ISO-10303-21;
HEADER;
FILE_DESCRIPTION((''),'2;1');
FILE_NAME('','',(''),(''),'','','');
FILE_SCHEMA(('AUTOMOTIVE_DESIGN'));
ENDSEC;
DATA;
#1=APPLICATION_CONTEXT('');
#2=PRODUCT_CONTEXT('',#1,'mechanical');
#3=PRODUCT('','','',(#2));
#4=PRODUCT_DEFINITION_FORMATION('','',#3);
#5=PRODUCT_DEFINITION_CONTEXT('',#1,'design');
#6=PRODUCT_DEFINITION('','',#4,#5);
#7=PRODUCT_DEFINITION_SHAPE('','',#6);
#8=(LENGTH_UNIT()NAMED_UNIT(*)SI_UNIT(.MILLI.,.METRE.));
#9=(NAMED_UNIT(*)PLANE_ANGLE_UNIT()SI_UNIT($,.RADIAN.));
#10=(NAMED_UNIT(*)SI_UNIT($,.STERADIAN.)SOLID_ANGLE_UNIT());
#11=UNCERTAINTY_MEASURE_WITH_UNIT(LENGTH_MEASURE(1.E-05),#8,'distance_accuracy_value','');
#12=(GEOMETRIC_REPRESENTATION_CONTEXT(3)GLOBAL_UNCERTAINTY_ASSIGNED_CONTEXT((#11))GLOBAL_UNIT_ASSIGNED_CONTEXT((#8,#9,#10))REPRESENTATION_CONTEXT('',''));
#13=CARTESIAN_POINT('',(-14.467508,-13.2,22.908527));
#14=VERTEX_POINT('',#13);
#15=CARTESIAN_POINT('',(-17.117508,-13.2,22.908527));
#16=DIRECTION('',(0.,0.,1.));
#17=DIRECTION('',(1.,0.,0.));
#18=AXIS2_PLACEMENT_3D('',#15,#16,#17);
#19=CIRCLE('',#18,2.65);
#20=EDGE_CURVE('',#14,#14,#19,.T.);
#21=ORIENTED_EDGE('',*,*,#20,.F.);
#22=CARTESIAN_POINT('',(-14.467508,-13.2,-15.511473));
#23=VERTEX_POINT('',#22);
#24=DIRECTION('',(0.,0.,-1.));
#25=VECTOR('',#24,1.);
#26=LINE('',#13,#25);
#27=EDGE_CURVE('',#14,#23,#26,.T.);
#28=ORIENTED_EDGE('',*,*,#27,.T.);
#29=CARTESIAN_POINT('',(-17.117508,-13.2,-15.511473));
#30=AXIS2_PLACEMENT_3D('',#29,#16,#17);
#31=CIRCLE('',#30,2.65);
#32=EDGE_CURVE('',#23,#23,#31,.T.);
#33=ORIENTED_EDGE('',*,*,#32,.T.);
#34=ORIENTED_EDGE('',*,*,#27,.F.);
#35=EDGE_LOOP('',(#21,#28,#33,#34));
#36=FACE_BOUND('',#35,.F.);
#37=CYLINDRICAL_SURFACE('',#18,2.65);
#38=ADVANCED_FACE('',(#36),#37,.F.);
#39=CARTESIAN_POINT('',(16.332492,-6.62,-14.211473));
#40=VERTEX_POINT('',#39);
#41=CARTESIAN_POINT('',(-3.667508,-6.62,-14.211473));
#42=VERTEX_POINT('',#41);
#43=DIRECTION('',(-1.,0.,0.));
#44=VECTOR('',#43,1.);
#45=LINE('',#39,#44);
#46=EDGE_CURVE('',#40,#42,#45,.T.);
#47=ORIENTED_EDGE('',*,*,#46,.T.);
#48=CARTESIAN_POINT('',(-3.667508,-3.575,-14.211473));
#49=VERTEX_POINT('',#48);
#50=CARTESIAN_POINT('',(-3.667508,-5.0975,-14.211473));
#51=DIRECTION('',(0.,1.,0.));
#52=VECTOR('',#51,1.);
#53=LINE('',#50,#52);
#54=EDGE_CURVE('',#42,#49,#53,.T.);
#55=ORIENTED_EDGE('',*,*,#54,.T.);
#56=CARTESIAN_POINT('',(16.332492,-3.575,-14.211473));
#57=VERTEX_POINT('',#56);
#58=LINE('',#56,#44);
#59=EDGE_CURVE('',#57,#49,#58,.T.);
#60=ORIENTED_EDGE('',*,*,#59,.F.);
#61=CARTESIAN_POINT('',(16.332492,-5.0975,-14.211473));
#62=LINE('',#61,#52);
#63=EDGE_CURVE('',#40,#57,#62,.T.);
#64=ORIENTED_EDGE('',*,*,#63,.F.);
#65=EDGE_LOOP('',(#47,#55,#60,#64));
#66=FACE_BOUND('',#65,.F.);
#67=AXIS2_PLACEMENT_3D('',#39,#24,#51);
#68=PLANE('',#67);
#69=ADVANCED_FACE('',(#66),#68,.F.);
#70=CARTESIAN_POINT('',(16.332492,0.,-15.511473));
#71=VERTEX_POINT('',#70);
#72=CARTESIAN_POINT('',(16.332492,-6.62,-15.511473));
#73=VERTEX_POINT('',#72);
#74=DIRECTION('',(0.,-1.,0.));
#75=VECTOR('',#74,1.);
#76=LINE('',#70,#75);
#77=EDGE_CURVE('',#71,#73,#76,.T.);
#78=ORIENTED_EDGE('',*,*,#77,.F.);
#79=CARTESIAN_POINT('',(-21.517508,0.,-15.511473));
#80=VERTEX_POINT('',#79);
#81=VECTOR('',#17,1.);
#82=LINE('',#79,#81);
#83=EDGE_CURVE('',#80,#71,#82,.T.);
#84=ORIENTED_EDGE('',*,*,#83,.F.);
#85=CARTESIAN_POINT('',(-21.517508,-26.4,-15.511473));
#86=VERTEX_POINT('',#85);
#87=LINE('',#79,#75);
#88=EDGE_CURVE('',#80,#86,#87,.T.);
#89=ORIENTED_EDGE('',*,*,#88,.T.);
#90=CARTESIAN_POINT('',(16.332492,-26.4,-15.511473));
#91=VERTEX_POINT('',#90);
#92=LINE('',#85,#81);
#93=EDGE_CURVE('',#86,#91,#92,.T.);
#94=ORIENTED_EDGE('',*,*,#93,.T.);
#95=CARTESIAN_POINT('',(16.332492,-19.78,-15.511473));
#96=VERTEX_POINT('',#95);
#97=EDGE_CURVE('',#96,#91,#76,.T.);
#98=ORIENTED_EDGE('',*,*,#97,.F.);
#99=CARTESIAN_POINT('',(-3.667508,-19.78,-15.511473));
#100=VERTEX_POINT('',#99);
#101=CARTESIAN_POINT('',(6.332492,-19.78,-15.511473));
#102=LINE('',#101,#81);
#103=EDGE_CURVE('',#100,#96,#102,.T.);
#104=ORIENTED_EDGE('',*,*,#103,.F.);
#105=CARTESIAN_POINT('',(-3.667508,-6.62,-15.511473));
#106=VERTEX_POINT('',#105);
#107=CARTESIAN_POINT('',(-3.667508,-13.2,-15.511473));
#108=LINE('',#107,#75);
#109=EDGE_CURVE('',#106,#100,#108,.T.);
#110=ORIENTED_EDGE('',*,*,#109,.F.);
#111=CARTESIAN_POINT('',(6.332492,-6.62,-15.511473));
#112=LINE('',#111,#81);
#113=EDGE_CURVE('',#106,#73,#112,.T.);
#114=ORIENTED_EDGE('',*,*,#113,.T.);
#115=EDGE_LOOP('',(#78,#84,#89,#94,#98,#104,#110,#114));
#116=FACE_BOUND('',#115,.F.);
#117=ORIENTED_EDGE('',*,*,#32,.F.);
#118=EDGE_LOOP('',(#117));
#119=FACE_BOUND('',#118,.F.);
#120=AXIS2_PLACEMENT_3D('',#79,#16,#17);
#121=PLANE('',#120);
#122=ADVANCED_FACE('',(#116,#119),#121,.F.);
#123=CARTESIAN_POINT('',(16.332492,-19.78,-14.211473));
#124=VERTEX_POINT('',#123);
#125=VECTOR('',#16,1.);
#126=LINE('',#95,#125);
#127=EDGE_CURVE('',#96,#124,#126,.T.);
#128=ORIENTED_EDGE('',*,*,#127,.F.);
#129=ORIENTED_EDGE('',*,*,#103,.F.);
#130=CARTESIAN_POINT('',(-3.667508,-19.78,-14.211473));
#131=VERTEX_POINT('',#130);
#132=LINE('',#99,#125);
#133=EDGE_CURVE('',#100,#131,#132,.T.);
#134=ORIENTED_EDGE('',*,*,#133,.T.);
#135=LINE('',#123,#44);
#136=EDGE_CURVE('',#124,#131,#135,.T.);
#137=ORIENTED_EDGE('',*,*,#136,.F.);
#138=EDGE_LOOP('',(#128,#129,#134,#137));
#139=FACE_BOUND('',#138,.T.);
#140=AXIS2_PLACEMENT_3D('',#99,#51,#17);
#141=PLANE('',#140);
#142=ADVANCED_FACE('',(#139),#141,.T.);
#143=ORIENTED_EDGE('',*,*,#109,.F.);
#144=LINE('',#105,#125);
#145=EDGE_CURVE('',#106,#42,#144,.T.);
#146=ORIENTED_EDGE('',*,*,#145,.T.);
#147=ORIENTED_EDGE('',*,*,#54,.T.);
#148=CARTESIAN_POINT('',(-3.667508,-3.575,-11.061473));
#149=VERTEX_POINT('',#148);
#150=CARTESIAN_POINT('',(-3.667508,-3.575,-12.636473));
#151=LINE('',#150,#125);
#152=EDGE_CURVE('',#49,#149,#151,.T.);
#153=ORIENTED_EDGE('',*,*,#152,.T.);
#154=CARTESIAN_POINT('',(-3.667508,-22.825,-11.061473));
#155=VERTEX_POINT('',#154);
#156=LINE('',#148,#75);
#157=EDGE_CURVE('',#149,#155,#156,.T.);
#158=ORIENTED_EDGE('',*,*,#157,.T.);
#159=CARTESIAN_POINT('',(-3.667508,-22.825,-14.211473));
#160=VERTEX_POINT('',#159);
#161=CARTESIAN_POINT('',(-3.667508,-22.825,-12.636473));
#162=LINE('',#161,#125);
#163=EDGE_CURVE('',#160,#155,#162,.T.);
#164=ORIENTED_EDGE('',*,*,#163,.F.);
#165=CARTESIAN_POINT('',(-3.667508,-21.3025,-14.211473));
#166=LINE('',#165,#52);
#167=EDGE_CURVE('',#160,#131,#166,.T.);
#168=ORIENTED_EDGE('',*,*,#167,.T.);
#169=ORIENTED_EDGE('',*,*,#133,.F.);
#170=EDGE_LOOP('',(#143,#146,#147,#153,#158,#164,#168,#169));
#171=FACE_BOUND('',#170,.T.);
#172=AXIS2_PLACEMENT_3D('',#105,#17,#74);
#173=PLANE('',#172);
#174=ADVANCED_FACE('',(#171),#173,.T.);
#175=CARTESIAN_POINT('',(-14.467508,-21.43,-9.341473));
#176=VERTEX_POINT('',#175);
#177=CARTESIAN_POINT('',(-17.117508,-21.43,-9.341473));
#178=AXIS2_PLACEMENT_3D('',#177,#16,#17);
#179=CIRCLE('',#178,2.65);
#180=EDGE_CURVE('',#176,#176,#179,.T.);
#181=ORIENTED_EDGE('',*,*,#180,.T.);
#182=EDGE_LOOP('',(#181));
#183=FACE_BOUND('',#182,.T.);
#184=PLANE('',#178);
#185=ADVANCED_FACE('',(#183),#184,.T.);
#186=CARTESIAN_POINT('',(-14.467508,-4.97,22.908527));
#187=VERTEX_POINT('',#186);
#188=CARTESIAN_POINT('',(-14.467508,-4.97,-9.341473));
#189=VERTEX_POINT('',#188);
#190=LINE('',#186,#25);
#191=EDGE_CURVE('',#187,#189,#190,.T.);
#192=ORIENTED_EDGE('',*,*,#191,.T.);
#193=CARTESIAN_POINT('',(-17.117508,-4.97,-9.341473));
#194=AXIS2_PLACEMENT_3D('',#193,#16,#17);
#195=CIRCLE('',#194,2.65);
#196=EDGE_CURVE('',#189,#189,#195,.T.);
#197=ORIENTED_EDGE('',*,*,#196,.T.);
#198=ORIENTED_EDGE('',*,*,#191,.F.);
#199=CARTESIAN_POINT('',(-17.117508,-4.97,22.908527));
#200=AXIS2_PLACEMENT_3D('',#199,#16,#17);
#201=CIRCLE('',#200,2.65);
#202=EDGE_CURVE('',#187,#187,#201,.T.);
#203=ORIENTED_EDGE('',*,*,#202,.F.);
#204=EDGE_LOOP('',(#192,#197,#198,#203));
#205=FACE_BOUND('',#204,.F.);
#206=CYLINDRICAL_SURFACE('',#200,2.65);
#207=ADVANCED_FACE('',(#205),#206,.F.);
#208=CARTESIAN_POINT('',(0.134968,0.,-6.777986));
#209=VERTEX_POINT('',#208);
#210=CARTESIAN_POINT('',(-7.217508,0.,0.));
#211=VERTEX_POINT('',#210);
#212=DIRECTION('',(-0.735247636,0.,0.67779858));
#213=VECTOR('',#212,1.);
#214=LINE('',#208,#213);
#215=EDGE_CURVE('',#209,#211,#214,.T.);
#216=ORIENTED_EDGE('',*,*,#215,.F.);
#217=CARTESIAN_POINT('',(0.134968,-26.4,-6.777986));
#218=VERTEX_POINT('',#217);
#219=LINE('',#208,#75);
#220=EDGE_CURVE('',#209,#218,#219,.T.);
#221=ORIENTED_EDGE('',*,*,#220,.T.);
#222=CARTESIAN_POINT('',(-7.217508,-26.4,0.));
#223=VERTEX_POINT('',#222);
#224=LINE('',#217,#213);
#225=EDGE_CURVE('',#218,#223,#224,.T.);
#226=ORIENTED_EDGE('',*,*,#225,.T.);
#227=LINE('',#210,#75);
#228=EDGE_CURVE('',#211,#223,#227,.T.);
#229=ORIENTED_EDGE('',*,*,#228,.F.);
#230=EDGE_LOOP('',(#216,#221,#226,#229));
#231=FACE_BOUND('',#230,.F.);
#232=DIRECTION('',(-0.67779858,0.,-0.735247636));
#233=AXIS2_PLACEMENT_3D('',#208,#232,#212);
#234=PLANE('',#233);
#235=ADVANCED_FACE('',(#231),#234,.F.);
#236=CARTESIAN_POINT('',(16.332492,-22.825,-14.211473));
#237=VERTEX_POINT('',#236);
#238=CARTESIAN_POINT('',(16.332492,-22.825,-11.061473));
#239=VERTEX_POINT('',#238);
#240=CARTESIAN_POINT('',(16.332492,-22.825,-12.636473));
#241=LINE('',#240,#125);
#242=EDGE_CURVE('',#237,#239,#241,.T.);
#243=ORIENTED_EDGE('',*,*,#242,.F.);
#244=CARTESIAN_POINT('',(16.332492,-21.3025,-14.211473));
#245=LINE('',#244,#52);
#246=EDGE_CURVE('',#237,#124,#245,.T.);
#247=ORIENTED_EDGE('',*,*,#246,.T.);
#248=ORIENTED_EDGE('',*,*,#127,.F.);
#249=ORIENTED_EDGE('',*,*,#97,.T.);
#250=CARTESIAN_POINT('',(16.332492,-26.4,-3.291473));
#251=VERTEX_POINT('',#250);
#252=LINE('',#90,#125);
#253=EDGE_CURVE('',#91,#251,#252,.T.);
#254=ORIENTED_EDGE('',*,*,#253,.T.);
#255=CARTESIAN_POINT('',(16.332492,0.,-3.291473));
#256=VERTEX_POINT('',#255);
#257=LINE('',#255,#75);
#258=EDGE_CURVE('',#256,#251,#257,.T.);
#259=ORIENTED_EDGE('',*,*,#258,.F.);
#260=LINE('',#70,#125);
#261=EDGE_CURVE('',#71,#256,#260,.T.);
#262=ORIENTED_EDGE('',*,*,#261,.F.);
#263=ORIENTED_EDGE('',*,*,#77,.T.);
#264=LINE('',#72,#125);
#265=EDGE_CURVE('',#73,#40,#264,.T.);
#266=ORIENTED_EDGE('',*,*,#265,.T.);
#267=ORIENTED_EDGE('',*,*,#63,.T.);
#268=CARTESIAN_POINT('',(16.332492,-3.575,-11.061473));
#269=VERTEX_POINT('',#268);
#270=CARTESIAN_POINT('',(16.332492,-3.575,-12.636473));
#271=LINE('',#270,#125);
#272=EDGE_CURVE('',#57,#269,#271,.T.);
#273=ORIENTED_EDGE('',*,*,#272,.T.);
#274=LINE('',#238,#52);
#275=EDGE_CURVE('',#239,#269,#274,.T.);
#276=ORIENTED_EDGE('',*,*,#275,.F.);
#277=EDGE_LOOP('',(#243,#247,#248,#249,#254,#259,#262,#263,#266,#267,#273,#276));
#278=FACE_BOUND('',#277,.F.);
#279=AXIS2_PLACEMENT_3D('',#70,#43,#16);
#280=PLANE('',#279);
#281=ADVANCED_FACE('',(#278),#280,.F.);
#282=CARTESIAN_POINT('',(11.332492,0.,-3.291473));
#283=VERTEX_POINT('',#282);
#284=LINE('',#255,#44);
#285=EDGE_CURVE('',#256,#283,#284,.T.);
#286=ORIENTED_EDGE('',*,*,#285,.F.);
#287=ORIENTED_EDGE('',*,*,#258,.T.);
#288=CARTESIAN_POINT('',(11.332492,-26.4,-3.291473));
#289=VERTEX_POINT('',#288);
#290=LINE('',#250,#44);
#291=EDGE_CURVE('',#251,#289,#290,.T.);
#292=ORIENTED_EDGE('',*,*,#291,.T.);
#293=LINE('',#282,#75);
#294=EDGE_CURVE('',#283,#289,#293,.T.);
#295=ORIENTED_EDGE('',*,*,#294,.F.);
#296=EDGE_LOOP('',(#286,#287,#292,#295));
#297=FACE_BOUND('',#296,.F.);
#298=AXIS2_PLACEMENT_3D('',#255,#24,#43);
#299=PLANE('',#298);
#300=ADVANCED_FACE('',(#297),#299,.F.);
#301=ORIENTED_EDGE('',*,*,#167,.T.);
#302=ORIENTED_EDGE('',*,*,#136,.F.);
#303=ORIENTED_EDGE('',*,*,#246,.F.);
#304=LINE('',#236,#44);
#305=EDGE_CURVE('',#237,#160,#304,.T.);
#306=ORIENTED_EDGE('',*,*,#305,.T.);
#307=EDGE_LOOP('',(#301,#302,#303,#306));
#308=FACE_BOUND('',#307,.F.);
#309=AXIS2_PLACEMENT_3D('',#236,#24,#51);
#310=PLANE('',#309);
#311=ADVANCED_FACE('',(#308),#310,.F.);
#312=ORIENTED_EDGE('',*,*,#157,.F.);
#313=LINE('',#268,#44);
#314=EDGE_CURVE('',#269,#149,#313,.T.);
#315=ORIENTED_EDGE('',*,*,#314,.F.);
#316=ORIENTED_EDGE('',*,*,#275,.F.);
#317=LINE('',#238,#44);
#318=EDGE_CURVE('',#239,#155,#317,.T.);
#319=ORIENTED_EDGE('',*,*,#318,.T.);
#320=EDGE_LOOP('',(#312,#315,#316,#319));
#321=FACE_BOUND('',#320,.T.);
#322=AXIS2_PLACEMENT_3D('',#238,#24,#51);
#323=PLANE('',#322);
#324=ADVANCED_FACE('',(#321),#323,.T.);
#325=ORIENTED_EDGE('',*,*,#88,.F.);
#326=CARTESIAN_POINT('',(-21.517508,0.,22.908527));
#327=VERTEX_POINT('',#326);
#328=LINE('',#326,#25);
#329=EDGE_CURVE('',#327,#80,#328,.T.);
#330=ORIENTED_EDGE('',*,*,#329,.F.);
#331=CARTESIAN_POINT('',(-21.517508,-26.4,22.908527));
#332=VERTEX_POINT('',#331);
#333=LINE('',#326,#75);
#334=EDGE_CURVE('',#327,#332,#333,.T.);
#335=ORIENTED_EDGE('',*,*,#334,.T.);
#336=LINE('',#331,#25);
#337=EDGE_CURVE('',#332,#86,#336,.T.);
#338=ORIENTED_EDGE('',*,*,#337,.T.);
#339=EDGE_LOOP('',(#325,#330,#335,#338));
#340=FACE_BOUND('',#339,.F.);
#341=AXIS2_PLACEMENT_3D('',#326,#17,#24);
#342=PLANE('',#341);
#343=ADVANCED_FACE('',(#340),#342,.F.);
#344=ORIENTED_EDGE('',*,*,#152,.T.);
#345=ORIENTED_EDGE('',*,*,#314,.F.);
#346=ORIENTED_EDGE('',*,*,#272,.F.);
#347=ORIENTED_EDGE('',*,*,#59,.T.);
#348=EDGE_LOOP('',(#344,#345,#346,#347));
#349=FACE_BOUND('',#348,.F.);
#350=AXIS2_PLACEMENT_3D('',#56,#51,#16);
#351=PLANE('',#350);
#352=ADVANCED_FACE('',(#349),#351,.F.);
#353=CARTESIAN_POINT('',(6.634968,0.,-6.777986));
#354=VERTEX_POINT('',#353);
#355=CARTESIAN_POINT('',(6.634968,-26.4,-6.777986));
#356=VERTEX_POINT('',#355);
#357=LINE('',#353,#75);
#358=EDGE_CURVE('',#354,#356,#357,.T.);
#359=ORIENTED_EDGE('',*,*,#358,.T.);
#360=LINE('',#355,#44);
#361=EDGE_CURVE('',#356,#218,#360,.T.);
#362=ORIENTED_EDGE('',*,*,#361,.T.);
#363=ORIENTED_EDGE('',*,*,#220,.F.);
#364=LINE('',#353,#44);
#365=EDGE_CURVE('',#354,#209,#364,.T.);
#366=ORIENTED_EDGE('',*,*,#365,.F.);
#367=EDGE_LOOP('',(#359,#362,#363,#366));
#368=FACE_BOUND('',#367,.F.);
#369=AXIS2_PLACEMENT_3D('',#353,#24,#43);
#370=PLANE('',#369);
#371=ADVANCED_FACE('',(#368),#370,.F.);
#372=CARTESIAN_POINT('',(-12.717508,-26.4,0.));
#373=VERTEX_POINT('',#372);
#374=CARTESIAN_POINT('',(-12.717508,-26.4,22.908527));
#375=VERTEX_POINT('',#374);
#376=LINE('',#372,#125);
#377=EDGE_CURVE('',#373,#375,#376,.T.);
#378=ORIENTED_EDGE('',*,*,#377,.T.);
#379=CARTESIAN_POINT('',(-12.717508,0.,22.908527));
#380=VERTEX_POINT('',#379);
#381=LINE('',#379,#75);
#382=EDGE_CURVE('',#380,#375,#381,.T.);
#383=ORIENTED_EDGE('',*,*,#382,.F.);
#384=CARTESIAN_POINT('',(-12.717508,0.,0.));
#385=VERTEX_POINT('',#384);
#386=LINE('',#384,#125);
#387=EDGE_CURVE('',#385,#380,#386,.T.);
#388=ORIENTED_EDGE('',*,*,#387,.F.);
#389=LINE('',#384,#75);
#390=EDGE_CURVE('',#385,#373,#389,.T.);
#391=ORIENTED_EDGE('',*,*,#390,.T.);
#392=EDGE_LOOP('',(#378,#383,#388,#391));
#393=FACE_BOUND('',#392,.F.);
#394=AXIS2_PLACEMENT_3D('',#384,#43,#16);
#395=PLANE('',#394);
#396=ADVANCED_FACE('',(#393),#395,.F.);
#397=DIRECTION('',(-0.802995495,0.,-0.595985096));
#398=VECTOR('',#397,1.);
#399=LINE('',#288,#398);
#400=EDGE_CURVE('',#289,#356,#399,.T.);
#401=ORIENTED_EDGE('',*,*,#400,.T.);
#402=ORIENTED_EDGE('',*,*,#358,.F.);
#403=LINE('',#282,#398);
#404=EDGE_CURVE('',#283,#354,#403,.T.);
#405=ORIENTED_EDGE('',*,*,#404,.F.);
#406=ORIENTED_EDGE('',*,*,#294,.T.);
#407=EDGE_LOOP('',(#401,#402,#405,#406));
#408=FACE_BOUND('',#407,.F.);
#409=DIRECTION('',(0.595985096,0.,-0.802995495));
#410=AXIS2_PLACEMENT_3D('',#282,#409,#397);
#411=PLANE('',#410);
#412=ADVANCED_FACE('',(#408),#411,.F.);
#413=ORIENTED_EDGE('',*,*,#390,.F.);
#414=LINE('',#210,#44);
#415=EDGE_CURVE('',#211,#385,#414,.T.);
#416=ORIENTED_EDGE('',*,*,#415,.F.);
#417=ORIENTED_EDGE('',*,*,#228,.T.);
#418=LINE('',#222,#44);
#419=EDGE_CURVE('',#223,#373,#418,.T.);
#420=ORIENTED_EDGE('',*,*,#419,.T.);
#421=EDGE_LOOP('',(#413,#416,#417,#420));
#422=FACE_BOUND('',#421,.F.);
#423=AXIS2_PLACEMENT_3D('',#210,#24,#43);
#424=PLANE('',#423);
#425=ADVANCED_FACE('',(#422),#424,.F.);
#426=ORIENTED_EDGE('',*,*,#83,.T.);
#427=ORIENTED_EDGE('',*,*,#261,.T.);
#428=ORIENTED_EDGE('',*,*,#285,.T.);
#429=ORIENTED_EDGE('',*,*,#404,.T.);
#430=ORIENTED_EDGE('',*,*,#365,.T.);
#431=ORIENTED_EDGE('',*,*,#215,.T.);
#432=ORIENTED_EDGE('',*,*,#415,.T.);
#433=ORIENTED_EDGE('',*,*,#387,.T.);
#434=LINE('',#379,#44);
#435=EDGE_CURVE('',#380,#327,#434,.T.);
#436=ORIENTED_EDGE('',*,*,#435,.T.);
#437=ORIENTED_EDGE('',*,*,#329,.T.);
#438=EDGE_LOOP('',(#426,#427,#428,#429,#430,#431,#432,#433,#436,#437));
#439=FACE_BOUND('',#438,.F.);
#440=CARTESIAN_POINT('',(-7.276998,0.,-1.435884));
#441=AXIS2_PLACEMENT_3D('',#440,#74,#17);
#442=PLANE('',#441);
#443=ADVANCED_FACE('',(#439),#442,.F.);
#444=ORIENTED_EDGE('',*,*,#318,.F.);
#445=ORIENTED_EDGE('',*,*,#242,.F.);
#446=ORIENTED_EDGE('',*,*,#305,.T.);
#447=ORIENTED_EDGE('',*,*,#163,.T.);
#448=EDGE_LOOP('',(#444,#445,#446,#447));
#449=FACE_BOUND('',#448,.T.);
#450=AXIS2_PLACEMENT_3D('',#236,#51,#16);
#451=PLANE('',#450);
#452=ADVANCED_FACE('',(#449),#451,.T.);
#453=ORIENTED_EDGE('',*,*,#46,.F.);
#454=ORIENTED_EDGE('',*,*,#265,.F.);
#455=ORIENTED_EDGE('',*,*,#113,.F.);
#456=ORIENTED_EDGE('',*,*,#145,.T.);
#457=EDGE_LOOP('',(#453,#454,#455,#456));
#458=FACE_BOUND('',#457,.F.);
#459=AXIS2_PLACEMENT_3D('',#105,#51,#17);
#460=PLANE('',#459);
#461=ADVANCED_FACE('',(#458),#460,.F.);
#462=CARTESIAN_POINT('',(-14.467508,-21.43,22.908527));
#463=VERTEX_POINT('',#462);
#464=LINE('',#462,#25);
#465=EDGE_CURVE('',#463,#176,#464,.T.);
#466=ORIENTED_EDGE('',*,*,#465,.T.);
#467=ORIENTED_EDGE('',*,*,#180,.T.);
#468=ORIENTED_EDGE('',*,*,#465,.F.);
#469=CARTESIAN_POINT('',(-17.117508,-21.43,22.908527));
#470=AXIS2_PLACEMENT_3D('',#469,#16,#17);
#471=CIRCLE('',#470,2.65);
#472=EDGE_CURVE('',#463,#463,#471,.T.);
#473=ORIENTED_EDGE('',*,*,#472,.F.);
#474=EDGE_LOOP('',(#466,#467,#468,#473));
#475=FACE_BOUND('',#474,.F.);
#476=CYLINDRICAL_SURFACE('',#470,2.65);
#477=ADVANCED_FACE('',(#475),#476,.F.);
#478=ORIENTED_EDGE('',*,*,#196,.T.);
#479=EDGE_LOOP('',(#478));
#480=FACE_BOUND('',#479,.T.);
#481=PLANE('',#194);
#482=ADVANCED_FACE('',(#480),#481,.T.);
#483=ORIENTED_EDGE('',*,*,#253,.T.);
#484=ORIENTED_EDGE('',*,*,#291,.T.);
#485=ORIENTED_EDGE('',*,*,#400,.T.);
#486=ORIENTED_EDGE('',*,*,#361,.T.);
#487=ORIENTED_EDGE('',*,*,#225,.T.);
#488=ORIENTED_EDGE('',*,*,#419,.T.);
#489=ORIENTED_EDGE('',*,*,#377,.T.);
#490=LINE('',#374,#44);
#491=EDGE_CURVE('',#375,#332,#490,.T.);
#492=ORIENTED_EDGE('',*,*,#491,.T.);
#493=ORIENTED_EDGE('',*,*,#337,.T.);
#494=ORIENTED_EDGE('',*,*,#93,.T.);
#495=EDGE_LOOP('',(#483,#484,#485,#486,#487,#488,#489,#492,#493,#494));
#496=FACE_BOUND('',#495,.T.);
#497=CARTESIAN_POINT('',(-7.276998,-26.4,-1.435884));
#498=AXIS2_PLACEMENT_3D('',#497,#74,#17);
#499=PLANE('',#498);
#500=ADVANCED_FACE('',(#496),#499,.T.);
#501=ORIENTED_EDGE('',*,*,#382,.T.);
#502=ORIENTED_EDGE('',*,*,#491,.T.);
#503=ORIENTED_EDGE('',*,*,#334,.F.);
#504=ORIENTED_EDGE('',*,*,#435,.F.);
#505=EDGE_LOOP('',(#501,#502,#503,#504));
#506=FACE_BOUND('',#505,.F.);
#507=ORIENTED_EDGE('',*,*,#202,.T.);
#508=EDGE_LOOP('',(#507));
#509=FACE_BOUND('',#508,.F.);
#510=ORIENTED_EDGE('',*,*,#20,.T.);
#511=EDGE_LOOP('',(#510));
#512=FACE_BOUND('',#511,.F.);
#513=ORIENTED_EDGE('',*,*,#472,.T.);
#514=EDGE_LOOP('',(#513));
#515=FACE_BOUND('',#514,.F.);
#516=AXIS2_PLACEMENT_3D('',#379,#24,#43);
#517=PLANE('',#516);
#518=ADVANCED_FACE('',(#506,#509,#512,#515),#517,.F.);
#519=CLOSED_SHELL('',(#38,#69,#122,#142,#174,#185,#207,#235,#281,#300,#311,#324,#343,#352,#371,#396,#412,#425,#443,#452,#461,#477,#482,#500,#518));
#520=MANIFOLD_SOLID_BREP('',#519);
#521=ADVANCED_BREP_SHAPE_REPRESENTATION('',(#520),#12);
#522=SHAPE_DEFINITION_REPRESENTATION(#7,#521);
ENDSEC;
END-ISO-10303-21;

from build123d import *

# Parameters (mm, degrees)
F1_DEPTH = 26.4
F2_R     = 2.65
F3_DEPTH = 32.25
F4_DEPTH = 40
F5_W     = 20
F5_H     = 13.16
F6_DEPTH = 4.45
F7_W     = 3.045
F7_H     = 3.15
F8_DEPTH = 20


# Not quite as in the source:
# - a feature names something its author has since deleted; it is built from what else it names


with BuildPart() as f1:
    # F0 (on Front) → F1 (new body)
    with BuildSketch(Plane.XZ):
        Polygon((-12.7175080026, 22.9085270187), (-21.5175080026, 22.9085270187), (-21.5175080026, -15.5114729813), (16.3324919974, -15.5114729813), (16.3324919974, -3.2914729813), (11.3324919974, -3.2914729813), (6.6349683525, -6.7779857958), (0.1349683525, -6.7779857958), (-7.2175080026, 0), (-12.7175080026, 0), align=None)
    extrude(amount=F1_DEPTH)

    # F2 (on face) → F3 (cut)
    with BuildSketch(Plane.XY.offset(22.9085270187)):
        with Locations((-17.1175080026, -4.97)):
            Circle(F2_R)
        with Locations((-17.1175080026, -21.43)):
            Circle(F2_R)
    extrude(amount=-F3_DEPTH, mode=Mode.SUBTRACT)

    # F2 (on face) → F4 (cut)
    with BuildSketch(Plane.XY.offset(22.9085270187)):
        with Locations((-17.1175080026, -13.2)):
            Circle(F2_R)
    extrude(amount=-F4_DEPTH, mode=Mode.SUBTRACT)

    # F5 (on face) → F6 (cut)
    with BuildSketch(Plane(origin=(0, 0, -15.5114729813), x_dir=(1, 0, 0), z_dir=(0, 0, -1))):
        with Locations((6.3324919974, 13.2)):
            Rectangle(F5_W, F5_H)
    extrude(amount=-F6_DEPTH, mode=Mode.SUBTRACT)

    # F7 (on face) → F8 (cut)
    with BuildSketch(Plane.YZ.offset(16.3324919974)):
        with Locations((-5.0975, -12.6364729813)):
            Rectangle(F7_W, F7_H)
        with Locations((-21.3025, -12.6364729813)):
            Rectangle(F7_W, F7_H)
    extrude(amount=-F8_DEPTH, mode=Mode.SUBTRACT)


solid = f1.part
